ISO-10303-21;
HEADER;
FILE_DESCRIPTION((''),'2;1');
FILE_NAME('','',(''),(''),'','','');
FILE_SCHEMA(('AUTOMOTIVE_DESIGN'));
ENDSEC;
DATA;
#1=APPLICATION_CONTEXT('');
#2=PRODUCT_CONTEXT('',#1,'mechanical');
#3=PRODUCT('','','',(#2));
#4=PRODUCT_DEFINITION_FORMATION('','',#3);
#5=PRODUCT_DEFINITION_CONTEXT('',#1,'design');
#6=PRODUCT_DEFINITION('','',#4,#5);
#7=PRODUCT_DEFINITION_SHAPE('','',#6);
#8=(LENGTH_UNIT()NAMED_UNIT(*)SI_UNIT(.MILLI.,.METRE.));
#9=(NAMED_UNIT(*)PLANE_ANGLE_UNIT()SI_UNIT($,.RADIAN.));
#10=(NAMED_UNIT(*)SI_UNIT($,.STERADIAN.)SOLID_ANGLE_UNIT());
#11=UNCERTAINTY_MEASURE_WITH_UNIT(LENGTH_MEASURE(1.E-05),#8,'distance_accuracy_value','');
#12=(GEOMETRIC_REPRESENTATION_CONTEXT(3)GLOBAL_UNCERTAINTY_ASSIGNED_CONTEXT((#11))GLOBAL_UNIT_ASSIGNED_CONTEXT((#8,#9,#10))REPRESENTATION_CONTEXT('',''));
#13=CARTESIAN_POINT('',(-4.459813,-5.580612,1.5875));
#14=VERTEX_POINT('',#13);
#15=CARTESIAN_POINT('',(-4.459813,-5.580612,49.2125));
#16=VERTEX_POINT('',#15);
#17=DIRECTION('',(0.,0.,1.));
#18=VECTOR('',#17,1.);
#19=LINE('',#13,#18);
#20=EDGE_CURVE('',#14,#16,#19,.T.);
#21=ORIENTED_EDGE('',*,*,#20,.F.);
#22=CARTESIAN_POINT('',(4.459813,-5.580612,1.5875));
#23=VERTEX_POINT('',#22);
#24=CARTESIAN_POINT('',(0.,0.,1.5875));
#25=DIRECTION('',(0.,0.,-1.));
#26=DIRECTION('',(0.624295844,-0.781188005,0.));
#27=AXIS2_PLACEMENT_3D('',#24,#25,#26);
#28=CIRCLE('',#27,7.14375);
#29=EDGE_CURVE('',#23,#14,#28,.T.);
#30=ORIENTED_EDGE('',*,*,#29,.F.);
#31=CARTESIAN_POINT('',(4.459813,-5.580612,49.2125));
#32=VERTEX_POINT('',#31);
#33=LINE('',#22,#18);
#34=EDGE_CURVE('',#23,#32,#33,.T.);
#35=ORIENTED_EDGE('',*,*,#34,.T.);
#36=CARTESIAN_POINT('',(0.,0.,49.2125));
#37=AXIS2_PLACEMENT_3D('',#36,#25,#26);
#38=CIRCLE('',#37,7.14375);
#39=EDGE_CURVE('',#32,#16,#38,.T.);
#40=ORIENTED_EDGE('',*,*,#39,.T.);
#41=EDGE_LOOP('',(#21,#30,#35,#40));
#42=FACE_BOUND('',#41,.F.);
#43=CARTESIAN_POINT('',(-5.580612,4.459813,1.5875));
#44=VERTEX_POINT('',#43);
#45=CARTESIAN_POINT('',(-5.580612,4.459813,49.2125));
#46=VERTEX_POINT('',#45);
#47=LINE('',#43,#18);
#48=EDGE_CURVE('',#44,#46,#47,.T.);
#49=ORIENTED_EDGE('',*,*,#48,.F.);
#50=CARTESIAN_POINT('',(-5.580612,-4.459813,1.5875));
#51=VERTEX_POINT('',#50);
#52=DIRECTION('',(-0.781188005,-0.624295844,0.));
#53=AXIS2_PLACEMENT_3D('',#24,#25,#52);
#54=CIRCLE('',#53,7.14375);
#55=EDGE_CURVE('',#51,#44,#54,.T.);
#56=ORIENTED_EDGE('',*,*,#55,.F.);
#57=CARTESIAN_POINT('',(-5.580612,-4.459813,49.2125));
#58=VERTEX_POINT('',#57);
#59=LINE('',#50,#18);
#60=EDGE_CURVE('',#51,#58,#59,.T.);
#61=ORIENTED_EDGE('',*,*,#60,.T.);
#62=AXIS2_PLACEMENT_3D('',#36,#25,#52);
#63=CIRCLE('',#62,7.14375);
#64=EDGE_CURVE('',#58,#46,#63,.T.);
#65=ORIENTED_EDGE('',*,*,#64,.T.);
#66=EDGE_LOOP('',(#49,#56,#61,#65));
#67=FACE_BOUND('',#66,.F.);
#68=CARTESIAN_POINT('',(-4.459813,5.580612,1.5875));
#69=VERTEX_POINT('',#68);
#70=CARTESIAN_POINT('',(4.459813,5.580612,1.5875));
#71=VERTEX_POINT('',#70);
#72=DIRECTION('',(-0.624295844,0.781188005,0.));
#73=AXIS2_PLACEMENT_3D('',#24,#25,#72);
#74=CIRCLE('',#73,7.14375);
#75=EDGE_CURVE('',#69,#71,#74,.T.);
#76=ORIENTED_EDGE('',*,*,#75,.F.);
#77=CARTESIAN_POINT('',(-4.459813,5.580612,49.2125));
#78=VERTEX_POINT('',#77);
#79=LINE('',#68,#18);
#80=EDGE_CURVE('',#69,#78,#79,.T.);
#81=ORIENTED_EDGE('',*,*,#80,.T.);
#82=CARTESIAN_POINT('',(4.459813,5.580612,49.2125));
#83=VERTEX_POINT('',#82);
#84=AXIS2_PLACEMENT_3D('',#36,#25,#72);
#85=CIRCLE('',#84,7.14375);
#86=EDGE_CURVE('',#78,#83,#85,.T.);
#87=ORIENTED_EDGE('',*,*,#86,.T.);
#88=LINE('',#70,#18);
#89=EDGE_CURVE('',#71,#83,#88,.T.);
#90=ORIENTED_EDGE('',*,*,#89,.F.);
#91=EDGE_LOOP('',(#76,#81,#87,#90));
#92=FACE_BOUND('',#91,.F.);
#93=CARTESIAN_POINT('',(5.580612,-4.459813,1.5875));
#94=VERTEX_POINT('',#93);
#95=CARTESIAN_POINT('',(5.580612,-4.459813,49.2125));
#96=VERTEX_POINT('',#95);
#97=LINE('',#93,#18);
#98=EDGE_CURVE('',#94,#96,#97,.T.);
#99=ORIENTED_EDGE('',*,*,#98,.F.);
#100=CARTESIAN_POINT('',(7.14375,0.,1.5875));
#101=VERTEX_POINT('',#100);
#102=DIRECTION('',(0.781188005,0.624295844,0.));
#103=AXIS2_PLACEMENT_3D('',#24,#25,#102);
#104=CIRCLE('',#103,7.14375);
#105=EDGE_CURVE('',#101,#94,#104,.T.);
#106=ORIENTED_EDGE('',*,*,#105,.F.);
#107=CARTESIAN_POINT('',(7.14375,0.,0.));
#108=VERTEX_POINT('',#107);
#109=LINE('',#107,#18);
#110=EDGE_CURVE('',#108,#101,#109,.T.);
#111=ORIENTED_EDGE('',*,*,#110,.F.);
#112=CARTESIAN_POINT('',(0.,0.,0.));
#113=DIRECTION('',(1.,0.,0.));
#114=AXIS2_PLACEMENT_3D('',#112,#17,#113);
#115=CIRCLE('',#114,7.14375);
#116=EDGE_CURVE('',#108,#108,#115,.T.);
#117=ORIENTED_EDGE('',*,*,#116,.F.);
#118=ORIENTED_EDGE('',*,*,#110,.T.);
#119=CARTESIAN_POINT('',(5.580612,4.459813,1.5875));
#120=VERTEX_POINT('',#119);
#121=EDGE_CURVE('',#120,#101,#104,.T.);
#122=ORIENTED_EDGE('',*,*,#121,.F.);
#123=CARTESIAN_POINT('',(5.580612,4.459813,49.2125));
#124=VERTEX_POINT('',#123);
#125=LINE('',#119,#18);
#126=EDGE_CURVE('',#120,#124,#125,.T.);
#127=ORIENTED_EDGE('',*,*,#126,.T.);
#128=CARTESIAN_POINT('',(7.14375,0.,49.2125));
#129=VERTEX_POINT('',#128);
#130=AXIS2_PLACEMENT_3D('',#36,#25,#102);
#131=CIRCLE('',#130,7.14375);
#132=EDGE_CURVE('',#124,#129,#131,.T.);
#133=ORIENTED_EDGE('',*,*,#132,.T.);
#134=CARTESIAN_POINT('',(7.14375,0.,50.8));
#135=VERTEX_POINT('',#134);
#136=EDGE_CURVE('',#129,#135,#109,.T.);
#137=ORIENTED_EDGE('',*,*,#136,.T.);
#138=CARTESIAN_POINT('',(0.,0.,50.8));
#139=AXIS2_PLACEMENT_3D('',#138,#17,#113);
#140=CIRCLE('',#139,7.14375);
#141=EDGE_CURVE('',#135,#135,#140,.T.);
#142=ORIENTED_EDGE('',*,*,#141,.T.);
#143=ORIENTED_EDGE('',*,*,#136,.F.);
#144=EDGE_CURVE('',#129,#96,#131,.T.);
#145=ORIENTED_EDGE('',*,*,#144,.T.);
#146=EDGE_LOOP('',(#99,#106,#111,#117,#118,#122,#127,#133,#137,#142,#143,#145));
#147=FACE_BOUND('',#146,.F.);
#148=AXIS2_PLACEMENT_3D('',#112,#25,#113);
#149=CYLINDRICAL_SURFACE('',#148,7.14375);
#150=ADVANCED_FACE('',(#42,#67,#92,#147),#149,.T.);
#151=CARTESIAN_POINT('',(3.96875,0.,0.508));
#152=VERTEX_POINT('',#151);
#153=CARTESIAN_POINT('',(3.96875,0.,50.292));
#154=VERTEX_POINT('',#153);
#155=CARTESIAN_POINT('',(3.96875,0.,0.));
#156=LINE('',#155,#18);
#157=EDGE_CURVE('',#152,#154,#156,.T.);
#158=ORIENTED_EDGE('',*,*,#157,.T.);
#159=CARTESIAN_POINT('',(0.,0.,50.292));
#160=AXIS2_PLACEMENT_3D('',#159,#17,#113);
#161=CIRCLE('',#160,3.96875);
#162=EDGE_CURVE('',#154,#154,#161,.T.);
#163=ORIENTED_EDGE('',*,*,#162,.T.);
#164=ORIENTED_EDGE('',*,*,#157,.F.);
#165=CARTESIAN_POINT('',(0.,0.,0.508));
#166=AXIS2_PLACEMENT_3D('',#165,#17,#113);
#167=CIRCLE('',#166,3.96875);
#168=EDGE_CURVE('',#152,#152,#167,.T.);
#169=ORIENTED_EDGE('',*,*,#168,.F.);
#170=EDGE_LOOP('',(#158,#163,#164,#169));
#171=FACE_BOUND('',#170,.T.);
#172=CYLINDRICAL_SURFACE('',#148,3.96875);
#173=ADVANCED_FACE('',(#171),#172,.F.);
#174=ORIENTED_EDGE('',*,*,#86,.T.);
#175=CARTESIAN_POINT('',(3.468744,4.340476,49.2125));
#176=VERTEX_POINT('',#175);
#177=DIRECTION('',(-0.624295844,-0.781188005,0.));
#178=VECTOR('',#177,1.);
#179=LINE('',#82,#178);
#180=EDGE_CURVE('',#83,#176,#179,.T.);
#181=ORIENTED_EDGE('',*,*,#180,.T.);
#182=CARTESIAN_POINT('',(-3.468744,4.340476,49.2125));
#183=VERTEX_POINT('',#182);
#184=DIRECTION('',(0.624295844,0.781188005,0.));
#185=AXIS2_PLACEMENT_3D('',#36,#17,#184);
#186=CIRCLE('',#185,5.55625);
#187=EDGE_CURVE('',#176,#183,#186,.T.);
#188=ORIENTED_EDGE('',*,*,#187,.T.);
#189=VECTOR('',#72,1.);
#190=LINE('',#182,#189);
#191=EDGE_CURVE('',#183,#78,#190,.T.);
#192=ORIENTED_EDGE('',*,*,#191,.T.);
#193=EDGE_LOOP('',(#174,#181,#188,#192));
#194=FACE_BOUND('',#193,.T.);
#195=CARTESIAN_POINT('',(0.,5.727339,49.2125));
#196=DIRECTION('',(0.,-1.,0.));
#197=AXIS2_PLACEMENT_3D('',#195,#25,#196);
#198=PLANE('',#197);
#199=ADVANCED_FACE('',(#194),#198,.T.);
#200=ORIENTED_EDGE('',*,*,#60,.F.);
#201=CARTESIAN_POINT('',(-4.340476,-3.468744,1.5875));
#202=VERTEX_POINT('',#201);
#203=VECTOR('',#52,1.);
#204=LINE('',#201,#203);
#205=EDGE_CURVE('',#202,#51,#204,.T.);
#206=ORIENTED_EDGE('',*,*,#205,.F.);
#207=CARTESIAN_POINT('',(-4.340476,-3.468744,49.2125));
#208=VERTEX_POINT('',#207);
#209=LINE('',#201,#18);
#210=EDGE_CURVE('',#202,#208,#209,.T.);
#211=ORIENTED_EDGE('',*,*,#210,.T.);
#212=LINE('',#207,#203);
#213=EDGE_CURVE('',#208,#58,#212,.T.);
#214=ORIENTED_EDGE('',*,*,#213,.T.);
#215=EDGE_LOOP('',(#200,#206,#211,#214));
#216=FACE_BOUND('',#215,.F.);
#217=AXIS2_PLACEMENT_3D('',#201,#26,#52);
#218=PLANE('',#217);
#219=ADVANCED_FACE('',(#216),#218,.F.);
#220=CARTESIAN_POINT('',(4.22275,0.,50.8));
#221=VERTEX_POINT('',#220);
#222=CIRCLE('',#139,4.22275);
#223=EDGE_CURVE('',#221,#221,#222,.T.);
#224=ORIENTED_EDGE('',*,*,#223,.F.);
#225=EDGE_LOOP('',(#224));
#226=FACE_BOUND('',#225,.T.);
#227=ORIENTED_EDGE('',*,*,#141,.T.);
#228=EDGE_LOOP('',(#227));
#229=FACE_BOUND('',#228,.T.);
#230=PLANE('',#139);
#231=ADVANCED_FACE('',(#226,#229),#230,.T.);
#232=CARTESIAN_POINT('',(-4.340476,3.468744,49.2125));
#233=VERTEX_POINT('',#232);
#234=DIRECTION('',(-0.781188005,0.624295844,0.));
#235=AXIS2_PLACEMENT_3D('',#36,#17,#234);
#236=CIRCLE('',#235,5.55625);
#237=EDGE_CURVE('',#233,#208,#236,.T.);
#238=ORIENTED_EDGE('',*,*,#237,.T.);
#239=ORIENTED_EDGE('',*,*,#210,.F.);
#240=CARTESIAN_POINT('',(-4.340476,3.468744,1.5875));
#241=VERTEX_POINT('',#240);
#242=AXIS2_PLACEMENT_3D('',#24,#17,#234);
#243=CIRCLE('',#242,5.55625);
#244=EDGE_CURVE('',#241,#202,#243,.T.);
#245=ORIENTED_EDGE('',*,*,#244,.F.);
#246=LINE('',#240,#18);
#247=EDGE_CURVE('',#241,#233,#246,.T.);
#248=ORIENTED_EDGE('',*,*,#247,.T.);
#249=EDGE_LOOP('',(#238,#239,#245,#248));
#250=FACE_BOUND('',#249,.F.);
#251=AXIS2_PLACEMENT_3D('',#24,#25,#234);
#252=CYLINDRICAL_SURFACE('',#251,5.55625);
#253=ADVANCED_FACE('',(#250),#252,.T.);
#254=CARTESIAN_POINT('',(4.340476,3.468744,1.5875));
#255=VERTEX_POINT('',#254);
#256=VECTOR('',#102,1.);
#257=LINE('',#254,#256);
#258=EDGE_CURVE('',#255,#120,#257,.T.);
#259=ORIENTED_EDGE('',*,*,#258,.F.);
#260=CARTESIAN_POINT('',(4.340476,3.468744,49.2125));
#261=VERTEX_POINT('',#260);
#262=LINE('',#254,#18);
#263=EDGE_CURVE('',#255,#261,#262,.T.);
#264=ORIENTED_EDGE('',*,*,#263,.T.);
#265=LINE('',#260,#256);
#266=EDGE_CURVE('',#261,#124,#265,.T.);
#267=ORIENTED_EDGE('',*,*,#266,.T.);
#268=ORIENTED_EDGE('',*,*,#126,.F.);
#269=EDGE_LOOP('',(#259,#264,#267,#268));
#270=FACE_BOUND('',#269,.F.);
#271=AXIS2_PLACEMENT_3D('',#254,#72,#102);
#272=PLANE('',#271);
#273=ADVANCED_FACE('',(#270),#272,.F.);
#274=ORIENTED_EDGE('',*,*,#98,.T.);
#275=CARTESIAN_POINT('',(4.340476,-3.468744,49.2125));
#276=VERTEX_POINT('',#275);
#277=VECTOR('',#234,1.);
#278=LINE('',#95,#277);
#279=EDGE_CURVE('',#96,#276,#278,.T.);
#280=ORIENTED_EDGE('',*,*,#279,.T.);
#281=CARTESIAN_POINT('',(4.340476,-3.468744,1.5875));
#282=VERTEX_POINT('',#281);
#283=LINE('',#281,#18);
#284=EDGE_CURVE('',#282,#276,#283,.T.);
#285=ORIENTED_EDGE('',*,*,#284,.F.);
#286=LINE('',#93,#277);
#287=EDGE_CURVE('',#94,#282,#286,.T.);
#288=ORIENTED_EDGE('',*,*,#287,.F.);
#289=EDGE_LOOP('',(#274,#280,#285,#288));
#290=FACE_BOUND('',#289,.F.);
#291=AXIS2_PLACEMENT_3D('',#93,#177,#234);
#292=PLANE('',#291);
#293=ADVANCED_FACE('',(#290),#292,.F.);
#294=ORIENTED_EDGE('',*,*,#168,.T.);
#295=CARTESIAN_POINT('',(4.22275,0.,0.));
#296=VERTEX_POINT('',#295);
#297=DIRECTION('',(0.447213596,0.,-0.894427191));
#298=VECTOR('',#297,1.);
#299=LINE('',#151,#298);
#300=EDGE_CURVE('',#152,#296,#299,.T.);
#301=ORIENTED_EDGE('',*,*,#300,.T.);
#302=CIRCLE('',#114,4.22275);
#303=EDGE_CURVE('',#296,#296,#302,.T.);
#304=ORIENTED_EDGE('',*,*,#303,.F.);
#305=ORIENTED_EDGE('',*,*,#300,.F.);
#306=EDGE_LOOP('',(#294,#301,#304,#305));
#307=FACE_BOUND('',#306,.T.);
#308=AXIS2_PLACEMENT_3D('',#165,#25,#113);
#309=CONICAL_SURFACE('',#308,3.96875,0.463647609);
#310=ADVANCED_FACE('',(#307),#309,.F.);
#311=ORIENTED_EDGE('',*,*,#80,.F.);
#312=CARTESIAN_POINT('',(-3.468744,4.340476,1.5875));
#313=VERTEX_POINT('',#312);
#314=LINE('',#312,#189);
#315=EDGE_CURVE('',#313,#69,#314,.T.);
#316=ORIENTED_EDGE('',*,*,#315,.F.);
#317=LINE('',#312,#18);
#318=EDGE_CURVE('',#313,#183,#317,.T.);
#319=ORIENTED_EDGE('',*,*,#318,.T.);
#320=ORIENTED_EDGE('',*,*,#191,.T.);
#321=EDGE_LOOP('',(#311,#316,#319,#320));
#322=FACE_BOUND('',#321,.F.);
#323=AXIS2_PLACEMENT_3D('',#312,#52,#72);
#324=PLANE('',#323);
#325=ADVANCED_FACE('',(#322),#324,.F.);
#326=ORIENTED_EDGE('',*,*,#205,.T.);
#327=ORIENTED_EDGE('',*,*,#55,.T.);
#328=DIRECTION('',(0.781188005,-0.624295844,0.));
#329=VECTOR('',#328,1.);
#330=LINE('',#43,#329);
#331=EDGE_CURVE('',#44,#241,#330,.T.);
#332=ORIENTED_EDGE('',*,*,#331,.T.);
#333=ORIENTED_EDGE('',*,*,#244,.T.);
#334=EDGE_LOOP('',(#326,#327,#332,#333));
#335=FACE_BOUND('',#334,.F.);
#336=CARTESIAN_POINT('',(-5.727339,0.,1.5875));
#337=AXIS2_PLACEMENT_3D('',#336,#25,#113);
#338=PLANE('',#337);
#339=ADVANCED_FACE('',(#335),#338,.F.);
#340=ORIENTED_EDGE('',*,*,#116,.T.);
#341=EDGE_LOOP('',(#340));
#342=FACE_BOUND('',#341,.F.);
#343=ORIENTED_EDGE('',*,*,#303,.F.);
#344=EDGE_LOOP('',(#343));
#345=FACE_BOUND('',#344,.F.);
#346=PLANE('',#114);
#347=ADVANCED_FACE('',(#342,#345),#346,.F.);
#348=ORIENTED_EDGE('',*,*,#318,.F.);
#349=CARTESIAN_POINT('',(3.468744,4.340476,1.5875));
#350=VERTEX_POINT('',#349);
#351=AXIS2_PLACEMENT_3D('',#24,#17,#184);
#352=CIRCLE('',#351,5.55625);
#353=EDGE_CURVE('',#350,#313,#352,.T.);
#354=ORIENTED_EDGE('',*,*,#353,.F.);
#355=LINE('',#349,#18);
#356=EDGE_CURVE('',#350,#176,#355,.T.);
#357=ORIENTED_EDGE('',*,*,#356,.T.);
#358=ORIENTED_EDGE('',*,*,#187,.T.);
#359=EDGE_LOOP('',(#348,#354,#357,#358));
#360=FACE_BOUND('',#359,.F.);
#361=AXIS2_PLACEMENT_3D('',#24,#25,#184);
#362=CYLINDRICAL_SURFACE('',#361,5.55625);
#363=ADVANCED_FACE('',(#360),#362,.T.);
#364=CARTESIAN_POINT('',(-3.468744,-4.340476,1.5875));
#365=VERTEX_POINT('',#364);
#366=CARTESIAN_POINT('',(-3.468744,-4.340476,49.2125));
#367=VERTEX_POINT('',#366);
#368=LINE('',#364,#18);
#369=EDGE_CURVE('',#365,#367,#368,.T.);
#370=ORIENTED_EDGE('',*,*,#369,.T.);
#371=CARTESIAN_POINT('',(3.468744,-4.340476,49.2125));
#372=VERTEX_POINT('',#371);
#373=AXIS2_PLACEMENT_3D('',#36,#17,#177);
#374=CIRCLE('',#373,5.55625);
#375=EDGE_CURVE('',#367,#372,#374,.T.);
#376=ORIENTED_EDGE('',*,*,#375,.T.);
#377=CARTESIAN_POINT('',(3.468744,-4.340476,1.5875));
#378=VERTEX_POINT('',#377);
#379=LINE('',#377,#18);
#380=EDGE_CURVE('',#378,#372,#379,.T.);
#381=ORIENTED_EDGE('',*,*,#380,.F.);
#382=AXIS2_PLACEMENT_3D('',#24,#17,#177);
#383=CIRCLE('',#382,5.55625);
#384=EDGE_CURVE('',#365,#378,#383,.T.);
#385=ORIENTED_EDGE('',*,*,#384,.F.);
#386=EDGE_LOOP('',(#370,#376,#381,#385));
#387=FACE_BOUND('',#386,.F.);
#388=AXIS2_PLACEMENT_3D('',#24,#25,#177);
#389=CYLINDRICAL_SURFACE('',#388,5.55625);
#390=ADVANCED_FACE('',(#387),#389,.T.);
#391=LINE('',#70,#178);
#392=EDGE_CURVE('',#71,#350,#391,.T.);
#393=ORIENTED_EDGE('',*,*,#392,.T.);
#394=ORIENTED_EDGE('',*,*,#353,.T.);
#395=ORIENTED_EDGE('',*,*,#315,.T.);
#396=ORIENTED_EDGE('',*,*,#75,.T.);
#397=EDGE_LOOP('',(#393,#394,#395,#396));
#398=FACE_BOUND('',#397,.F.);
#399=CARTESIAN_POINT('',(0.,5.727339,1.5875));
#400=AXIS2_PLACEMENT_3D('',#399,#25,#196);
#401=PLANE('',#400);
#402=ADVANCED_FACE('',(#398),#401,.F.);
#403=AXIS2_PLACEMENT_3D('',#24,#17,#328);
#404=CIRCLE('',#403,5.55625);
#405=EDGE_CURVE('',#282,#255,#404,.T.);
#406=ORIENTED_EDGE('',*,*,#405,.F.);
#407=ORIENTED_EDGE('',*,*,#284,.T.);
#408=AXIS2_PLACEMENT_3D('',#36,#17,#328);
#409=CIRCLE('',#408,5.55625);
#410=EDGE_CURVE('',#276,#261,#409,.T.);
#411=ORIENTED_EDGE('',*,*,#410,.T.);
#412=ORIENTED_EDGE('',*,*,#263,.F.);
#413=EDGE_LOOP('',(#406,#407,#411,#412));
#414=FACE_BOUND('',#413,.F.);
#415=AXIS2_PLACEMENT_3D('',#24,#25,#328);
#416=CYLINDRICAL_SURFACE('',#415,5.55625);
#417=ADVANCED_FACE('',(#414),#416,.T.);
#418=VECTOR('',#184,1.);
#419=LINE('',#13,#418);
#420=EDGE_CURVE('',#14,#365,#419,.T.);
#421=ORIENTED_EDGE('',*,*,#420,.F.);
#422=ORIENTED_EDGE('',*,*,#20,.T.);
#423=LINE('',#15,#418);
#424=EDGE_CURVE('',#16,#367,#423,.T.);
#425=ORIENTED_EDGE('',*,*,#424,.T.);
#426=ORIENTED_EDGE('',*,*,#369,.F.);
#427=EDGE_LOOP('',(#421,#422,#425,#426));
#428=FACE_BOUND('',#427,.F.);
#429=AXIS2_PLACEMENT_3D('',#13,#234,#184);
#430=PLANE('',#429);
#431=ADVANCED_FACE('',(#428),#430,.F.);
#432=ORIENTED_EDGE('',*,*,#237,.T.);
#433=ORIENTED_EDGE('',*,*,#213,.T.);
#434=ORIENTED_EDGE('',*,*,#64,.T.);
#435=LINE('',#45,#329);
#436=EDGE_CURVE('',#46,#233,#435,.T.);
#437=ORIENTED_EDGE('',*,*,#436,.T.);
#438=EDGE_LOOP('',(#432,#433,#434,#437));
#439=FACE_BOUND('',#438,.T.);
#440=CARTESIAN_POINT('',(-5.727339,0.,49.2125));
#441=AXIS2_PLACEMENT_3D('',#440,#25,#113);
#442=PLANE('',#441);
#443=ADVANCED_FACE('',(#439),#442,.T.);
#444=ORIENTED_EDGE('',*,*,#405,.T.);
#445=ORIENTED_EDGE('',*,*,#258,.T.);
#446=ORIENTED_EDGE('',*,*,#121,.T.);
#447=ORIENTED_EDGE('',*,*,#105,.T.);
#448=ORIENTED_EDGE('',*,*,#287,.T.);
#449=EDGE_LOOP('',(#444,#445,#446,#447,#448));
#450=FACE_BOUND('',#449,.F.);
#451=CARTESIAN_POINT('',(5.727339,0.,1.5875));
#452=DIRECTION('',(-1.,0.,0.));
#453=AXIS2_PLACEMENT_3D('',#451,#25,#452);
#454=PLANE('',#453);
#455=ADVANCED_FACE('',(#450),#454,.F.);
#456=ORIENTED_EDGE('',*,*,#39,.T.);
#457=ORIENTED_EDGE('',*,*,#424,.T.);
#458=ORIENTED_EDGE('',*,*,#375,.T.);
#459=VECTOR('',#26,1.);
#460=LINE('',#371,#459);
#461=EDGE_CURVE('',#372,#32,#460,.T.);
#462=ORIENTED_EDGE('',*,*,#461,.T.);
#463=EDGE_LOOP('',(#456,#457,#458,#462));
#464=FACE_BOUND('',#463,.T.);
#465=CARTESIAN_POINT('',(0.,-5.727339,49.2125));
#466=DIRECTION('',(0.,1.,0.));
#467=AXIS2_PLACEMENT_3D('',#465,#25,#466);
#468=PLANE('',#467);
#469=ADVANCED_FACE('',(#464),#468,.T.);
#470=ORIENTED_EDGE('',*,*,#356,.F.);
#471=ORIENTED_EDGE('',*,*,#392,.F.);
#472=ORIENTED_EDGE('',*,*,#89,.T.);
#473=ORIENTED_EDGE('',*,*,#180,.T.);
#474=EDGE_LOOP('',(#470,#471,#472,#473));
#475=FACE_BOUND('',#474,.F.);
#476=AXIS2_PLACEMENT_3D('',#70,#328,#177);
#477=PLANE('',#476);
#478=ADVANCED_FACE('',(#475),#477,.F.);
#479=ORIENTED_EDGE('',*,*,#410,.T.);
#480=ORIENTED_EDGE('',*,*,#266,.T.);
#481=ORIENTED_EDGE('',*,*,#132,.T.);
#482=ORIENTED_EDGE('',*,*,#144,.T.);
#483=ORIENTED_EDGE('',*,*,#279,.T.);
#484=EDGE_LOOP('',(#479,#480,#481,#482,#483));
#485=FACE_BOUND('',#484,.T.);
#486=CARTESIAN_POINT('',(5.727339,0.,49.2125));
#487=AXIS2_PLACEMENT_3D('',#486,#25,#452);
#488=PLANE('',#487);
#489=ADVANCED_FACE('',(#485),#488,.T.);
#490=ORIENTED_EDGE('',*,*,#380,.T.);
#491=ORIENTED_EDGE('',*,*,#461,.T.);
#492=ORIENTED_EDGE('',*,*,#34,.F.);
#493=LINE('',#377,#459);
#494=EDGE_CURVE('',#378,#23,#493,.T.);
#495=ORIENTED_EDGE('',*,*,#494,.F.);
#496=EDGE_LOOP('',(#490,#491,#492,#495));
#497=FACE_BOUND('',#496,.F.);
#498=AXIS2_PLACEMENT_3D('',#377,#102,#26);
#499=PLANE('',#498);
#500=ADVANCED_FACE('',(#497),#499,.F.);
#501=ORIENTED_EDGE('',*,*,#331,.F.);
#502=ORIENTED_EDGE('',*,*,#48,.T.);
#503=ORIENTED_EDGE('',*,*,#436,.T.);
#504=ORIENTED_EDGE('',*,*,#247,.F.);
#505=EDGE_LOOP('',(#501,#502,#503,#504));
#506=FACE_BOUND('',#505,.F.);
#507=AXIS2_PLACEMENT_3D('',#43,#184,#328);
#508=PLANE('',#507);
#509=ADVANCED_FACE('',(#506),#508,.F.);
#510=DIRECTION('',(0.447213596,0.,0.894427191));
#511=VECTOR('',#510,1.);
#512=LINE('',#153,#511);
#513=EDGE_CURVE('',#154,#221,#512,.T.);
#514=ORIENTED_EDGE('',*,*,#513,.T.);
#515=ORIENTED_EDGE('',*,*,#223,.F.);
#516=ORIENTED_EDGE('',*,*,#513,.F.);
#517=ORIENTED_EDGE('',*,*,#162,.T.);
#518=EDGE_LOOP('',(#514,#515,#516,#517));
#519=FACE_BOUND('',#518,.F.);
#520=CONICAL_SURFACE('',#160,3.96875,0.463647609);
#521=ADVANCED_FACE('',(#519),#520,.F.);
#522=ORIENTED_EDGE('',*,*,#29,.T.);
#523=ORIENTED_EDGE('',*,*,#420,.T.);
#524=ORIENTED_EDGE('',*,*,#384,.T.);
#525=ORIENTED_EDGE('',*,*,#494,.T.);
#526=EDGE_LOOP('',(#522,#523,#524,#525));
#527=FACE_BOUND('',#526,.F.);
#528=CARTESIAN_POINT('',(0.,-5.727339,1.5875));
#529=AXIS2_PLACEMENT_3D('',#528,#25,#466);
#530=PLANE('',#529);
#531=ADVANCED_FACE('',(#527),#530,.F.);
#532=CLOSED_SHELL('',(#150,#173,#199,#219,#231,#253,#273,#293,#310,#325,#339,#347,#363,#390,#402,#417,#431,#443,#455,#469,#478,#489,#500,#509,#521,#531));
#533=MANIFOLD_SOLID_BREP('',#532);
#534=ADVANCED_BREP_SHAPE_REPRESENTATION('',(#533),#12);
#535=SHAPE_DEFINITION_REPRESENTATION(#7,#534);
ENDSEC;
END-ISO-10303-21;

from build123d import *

# Parameters (mm, degrees)
F0_R            = 7.14375
F0_R_2          = 3.96875
F1_DEPTH        = 50.8
F2_SIZE2        = 0.254
F2_SIZE         = 0.508
F6_DEPTH        = 47.625
F6_COPIES_COUNT = 4


# Not quite as in the source:
# - a pattern or mirror of a feature is missing from the dataset's text; its kind, count and spacing are read off the source's solid


with BuildPart() as f1:
    # F0 (on Top) → F1 (new body)
    with BuildSketch(Plane.XY):
        Circle(F0_R)
        Circle(F0_R_2, mode=Mode.SUBTRACT)
    extrude(amount=F1_DEPTH)

    # F2
    f2_edges = [f1.edges().sort_by_distance(p)[0] for p in [
        (-3.96875, 0, 50.8),
        (-3.96875, 0, 0),
    ]]
    f2_side = f1.faces().sort_by_distance((-3.96875, 0, 25.4))[0]
    chamfer(f2_edges, length=F2_SIZE, length2=F2_SIZE2, reference=f2_side)

    # F4 (on offset) → F6 (cut, through all)
    with BuildSketch(Plane(origin=(0, 0, 1.5875), x_dir=(1, 0, 0), z_dir=(0, 0, -1))):
        with BuildLine():
            ThreePointArc((-4.3404758524, -3.4687437838), (-5.55625, 0), (-4.3404758524, 3.4687437838))
            Line((-4.3404758524, 3.4687437838), (-5.5806118102, 4.4598134363))
            ThreePointArc((-5.5806118102, 4.4598134363), (-7.14375, 0), (-5.5806118102, -4.4598134363))
            Line((-5.5806118102, -4.4598134363), (-4.3404758524, -3.4687437838))
        make_face()
    f6 = extrude(amount=-F6_DEPTH, mode=Mode.SUBTRACT)

    # F6_copies: F6 ×4 about axis
    f6_copies_axis = Axis((0, 0, 0), (0, 0, 1))
    for i in range(1, F6_COPIES_COUNT):
        add(f6.rotate(f6_copies_axis, i * 360 / F6_COPIES_COUNT), mode=Mode.SUBTRACT)


solid = f1.part
